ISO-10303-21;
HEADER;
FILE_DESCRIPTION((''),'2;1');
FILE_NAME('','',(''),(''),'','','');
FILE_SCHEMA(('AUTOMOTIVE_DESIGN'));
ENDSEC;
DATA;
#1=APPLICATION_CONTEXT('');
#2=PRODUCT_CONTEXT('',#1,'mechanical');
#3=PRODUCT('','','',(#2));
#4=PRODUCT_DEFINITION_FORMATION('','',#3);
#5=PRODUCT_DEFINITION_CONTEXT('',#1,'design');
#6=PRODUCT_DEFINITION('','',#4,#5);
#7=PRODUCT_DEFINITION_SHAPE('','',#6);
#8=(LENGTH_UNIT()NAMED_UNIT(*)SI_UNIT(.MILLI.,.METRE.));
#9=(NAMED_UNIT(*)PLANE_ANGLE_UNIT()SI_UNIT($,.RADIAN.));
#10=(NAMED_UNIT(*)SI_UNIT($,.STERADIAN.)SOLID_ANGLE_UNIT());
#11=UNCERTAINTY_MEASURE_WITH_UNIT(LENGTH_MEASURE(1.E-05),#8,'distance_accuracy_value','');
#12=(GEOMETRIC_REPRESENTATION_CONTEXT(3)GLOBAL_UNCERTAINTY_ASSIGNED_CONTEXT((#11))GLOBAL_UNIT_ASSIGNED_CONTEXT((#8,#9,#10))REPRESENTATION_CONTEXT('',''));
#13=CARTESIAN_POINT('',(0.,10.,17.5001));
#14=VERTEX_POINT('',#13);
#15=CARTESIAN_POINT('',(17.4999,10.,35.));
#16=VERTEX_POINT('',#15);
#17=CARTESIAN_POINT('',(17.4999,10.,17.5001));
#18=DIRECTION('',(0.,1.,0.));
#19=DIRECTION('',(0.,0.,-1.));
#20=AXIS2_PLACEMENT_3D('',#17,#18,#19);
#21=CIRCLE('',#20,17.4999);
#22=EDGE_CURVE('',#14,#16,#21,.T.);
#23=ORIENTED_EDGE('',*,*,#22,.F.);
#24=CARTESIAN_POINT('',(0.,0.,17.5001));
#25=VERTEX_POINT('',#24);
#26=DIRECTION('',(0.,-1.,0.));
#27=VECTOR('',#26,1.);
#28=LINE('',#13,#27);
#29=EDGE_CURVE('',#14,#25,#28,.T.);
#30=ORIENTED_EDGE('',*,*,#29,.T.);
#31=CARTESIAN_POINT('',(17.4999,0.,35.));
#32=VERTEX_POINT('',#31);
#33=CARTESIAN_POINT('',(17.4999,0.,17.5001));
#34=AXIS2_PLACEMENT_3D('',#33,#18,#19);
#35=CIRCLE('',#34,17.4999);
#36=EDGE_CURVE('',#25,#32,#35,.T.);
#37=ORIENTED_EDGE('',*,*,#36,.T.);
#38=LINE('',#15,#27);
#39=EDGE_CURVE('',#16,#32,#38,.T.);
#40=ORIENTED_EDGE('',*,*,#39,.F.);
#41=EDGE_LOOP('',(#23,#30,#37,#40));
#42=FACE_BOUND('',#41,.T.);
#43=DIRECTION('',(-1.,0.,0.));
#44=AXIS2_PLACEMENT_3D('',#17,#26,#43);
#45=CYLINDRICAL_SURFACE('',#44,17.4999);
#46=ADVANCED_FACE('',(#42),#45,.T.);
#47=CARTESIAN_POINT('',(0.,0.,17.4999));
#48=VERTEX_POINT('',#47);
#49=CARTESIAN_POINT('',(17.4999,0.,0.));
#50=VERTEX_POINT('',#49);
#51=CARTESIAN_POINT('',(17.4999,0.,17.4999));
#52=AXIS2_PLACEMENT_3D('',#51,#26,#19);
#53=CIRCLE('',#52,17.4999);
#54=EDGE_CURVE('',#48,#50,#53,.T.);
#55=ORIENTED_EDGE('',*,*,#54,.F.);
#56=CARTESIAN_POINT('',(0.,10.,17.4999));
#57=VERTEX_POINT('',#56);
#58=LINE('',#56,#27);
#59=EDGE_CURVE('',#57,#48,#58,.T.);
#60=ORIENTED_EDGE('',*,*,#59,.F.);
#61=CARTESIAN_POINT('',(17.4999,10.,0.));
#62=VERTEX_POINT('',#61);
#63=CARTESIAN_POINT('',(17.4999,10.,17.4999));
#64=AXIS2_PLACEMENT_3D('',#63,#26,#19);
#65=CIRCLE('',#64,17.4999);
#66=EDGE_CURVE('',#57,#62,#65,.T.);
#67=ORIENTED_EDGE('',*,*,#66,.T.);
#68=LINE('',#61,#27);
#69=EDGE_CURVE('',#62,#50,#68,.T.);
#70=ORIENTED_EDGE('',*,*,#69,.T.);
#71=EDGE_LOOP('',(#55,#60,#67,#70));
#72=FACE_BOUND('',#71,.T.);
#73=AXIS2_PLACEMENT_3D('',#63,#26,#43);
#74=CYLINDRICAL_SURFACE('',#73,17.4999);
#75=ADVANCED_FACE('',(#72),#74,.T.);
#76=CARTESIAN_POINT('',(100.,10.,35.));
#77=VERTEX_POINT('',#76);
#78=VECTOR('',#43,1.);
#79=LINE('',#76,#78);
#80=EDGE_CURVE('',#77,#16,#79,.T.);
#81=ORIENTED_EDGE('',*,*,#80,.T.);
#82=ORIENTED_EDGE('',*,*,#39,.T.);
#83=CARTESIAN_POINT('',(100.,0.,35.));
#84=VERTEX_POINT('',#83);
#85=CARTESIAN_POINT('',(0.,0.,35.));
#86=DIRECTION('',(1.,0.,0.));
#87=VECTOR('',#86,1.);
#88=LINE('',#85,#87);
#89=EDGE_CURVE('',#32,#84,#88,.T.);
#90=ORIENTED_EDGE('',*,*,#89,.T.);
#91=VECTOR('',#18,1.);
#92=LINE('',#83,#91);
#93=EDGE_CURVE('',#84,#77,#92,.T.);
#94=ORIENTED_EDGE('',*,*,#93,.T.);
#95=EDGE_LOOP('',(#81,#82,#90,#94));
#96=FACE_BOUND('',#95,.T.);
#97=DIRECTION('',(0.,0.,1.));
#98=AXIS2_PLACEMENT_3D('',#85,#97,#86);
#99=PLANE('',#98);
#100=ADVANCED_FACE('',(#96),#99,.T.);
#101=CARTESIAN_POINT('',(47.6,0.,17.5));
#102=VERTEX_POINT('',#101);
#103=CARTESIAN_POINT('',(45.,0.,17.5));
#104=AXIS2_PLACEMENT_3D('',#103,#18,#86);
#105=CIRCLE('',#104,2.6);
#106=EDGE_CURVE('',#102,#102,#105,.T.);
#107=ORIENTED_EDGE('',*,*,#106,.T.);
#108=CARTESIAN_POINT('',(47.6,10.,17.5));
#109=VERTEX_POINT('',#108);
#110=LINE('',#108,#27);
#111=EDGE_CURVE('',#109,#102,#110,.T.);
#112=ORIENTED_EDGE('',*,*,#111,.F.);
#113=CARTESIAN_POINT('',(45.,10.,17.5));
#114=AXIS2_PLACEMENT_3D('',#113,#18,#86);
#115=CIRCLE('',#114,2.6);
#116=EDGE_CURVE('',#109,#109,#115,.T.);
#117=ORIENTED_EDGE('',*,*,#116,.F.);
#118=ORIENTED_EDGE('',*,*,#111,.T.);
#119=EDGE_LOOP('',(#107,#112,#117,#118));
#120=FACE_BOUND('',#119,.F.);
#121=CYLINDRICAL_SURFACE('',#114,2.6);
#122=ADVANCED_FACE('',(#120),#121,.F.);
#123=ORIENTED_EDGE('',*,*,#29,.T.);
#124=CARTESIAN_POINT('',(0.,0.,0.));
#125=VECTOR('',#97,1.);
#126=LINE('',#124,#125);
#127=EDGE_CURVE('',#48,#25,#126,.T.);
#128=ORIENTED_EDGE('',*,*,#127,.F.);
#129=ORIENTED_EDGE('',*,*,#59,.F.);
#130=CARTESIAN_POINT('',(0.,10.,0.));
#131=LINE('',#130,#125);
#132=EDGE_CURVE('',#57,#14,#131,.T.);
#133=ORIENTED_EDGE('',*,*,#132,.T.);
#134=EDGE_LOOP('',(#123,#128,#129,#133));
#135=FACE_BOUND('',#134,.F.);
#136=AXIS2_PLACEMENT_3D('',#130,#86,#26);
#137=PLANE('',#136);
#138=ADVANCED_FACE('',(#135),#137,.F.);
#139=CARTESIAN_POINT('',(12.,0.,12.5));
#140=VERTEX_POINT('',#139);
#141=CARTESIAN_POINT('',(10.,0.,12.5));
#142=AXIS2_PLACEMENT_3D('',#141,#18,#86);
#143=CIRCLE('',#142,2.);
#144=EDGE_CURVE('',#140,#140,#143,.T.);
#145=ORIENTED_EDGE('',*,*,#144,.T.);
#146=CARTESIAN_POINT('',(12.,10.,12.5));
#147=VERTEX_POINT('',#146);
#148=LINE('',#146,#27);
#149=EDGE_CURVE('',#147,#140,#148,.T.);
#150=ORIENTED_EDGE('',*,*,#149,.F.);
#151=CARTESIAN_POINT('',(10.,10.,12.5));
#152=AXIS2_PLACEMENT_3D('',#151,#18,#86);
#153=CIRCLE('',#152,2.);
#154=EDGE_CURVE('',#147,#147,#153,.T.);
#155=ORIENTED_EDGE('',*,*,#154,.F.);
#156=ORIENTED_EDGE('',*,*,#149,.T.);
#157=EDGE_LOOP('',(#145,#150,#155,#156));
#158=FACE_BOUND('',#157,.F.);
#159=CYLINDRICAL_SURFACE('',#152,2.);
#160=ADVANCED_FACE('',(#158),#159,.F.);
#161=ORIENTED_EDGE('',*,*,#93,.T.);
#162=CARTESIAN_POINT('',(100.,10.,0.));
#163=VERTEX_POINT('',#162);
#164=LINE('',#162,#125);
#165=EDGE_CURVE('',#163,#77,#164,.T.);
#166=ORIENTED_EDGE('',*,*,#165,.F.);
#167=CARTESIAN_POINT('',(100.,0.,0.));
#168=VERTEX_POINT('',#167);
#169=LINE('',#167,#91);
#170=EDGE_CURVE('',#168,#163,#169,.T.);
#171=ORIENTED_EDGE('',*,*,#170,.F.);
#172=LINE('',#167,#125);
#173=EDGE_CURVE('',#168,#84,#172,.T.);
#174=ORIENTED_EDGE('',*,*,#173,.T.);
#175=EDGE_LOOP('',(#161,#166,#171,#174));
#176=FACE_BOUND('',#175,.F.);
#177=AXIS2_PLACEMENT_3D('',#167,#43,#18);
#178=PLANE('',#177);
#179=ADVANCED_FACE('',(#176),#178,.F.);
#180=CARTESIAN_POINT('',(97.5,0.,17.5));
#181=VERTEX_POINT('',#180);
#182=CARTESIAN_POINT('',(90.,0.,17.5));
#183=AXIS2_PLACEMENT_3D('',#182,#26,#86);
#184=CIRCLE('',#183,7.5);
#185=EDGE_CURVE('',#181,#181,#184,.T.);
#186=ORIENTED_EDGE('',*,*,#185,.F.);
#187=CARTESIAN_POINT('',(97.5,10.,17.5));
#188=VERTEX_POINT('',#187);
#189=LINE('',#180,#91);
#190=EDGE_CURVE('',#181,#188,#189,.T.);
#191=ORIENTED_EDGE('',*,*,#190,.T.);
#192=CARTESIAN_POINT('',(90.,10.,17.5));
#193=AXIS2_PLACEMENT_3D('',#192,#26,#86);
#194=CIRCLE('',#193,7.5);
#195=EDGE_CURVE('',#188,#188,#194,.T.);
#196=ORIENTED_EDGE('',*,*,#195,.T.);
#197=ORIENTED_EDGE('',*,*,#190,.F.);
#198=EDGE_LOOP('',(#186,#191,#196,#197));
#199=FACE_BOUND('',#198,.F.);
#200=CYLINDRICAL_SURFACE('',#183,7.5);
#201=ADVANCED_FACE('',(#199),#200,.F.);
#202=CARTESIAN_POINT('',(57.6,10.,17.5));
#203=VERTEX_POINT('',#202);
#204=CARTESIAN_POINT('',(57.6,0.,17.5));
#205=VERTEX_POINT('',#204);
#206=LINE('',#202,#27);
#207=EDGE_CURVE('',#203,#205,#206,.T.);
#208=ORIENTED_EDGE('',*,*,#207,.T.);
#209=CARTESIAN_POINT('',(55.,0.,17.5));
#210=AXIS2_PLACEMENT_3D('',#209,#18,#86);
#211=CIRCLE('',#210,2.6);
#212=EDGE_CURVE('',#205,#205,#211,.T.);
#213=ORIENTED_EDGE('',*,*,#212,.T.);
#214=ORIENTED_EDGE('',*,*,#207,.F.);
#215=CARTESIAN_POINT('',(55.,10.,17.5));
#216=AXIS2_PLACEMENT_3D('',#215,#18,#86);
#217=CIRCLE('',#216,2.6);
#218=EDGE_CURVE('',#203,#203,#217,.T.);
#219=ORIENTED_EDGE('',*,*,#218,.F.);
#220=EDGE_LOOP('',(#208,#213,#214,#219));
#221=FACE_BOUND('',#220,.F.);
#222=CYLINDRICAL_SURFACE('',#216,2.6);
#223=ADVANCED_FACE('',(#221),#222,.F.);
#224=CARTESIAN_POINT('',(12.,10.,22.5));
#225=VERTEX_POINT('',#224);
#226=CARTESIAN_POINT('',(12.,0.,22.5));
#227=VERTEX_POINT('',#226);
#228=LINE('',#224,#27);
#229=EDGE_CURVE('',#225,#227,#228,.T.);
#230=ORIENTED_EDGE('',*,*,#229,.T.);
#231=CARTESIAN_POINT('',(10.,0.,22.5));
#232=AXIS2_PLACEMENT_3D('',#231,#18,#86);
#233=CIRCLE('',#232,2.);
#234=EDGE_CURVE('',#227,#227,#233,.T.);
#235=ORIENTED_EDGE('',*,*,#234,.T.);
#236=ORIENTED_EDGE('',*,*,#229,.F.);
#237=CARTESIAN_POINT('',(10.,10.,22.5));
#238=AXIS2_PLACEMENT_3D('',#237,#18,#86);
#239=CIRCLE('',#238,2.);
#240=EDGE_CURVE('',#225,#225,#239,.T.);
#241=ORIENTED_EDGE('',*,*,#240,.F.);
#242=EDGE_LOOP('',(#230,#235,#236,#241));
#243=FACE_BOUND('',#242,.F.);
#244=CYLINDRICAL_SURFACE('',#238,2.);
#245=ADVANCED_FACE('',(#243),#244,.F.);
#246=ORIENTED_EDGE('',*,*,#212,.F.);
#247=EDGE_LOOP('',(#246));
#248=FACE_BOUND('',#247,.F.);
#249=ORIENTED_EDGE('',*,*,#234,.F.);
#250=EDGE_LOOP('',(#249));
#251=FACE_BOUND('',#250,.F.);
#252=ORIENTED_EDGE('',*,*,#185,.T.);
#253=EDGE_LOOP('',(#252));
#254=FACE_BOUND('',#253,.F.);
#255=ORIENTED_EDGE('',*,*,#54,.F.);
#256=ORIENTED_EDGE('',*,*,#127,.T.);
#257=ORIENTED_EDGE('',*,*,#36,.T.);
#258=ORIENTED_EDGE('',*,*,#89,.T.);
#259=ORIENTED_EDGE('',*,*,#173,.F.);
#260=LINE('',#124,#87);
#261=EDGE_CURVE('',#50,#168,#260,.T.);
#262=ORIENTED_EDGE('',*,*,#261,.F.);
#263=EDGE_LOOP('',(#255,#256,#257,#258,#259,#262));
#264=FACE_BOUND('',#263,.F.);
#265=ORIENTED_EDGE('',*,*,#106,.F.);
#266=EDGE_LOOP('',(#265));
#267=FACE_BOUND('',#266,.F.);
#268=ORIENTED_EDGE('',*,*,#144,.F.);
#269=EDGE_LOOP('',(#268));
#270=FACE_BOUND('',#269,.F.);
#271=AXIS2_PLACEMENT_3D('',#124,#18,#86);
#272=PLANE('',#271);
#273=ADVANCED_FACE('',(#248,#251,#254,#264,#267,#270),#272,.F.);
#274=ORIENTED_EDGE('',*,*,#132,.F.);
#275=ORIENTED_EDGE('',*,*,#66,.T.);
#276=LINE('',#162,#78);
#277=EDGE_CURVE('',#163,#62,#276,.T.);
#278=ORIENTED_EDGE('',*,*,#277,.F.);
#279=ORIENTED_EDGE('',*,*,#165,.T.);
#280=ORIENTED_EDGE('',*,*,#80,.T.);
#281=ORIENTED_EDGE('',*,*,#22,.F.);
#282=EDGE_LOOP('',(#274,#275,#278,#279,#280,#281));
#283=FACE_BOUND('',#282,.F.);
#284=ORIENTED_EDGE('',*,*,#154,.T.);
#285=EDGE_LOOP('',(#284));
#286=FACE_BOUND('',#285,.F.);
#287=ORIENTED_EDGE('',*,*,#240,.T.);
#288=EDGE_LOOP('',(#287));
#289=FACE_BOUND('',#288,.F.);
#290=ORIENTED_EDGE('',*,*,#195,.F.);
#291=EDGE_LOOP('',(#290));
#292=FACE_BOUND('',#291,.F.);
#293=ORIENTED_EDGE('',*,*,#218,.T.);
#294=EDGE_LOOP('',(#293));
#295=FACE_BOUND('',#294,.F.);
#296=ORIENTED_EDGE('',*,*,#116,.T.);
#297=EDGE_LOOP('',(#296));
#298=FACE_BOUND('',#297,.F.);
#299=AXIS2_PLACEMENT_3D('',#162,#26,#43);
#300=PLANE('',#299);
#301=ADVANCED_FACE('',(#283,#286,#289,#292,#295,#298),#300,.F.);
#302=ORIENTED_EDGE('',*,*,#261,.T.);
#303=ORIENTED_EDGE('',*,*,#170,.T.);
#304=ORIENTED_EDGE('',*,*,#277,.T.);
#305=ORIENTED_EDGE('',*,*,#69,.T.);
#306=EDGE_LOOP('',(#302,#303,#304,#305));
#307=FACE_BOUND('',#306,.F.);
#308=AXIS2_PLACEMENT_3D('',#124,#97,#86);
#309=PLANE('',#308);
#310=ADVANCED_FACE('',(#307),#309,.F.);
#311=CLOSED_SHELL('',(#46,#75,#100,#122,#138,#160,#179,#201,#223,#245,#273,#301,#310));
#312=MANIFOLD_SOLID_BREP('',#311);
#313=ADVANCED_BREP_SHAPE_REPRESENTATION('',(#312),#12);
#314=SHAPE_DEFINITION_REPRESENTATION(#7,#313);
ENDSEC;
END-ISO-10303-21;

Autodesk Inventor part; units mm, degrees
sketch "스케치1" plane through (0, 0, 0) normal (0, 0, 1) x (1, 0, 0)
  line L0 (0, 0) -> (100, 0)
  line L1 (100, 0) -> (100, 10)
  line L2 (100, 10) -> (0, 10)
  line L3 (0, 10) -> (0, 0)
  dimension "d0" = 100
  dimension "d1" = 10
extrude "돌출1" add sketch "스케치1" along normal blind 35
sketch "스케치3" plane through (0, 0, 0) normal (0, -1, 0) x (1, 0, 0)
  line L0 (0, 0) -> (100, 0) projected
  line L1 (100, 0) -> (100, 35) projected
  line L2 (0, 35) -> (100, 35) projected
  line L3 (0, 0) -> (0, 35) projected
  circle A0 centre (90, 17.5) radius 7.5
  point P0 (15, 17.5)
  point P1 (100, 17.5)
  dimension "d8" = 15
  dimension "d12" = 10
extrude "돌출3" cut sketch "스케치3" against normal through all contours A0
ref_plane "작업 평면1" through (50, 0, 0) normal (-1, 0, 0) x (0, 0, 1)
ref_plane "작업 평면2" through (65, 40, 45) normal (0, 1, 0) x (1, 0, 0)
ref_plane "작업 평면3" through (50, 0, 0) normal (1, 0, 0) x (0, 0, -1)
sketch "스케치4" plane through (0, 10, 0) normal (0, 1, 0) x (1, 0, 0)
  circle A0 centre (90, -17.5) radius 7.5 projected
  line L0 (100, 0) -> (0, 0) projected
  line L1 (0, 0) -> (0, -35) projected
  line L2 (100, -35) -> (0, -35) projected
  line L3 (100, 0) -> (100, -35) projected
  circle A1 centre (45, -17.5) radius 2.6
  circle A2 centre (55, -17.5) radius 2.6
  line L4 (100, 0) -> (0, 0) projected
  point P0 (50, 0)
  point P1 (50, 0)
  point P2 (100, -17.5)
  dimension "d16" = 5.2
  dimension "d17" = 5.2
  dimension "d18" = 10
  dimension "d19" = 5
extrude "돌출4" cut sketch "스케치4" against normal through all contours A1 | A2
sketch "스케치5" plane through (0, 10, 0) normal (0, 1, 0) x (1, 0, 0)
  circle A0 centre (10, -12.5) radius 2
  circle A1 centre (10, -22.5) radius 2
  line L0 (0, 0) -> (0, -35) projected
  point P0 (0, -17.5)
  dimension "d20" = 4
  dimension "d21" = 4
  dimension "d22" = 10
  dimension "d23" = 5
  dimension "d24" = 10
extrude "돌출5" cut sketch "스케치5" against normal through all
fillet "모깎기1" radius 17.5 2 edges at (0, 5, 0) (0, 5, 35)
properties part number "다리-2"
